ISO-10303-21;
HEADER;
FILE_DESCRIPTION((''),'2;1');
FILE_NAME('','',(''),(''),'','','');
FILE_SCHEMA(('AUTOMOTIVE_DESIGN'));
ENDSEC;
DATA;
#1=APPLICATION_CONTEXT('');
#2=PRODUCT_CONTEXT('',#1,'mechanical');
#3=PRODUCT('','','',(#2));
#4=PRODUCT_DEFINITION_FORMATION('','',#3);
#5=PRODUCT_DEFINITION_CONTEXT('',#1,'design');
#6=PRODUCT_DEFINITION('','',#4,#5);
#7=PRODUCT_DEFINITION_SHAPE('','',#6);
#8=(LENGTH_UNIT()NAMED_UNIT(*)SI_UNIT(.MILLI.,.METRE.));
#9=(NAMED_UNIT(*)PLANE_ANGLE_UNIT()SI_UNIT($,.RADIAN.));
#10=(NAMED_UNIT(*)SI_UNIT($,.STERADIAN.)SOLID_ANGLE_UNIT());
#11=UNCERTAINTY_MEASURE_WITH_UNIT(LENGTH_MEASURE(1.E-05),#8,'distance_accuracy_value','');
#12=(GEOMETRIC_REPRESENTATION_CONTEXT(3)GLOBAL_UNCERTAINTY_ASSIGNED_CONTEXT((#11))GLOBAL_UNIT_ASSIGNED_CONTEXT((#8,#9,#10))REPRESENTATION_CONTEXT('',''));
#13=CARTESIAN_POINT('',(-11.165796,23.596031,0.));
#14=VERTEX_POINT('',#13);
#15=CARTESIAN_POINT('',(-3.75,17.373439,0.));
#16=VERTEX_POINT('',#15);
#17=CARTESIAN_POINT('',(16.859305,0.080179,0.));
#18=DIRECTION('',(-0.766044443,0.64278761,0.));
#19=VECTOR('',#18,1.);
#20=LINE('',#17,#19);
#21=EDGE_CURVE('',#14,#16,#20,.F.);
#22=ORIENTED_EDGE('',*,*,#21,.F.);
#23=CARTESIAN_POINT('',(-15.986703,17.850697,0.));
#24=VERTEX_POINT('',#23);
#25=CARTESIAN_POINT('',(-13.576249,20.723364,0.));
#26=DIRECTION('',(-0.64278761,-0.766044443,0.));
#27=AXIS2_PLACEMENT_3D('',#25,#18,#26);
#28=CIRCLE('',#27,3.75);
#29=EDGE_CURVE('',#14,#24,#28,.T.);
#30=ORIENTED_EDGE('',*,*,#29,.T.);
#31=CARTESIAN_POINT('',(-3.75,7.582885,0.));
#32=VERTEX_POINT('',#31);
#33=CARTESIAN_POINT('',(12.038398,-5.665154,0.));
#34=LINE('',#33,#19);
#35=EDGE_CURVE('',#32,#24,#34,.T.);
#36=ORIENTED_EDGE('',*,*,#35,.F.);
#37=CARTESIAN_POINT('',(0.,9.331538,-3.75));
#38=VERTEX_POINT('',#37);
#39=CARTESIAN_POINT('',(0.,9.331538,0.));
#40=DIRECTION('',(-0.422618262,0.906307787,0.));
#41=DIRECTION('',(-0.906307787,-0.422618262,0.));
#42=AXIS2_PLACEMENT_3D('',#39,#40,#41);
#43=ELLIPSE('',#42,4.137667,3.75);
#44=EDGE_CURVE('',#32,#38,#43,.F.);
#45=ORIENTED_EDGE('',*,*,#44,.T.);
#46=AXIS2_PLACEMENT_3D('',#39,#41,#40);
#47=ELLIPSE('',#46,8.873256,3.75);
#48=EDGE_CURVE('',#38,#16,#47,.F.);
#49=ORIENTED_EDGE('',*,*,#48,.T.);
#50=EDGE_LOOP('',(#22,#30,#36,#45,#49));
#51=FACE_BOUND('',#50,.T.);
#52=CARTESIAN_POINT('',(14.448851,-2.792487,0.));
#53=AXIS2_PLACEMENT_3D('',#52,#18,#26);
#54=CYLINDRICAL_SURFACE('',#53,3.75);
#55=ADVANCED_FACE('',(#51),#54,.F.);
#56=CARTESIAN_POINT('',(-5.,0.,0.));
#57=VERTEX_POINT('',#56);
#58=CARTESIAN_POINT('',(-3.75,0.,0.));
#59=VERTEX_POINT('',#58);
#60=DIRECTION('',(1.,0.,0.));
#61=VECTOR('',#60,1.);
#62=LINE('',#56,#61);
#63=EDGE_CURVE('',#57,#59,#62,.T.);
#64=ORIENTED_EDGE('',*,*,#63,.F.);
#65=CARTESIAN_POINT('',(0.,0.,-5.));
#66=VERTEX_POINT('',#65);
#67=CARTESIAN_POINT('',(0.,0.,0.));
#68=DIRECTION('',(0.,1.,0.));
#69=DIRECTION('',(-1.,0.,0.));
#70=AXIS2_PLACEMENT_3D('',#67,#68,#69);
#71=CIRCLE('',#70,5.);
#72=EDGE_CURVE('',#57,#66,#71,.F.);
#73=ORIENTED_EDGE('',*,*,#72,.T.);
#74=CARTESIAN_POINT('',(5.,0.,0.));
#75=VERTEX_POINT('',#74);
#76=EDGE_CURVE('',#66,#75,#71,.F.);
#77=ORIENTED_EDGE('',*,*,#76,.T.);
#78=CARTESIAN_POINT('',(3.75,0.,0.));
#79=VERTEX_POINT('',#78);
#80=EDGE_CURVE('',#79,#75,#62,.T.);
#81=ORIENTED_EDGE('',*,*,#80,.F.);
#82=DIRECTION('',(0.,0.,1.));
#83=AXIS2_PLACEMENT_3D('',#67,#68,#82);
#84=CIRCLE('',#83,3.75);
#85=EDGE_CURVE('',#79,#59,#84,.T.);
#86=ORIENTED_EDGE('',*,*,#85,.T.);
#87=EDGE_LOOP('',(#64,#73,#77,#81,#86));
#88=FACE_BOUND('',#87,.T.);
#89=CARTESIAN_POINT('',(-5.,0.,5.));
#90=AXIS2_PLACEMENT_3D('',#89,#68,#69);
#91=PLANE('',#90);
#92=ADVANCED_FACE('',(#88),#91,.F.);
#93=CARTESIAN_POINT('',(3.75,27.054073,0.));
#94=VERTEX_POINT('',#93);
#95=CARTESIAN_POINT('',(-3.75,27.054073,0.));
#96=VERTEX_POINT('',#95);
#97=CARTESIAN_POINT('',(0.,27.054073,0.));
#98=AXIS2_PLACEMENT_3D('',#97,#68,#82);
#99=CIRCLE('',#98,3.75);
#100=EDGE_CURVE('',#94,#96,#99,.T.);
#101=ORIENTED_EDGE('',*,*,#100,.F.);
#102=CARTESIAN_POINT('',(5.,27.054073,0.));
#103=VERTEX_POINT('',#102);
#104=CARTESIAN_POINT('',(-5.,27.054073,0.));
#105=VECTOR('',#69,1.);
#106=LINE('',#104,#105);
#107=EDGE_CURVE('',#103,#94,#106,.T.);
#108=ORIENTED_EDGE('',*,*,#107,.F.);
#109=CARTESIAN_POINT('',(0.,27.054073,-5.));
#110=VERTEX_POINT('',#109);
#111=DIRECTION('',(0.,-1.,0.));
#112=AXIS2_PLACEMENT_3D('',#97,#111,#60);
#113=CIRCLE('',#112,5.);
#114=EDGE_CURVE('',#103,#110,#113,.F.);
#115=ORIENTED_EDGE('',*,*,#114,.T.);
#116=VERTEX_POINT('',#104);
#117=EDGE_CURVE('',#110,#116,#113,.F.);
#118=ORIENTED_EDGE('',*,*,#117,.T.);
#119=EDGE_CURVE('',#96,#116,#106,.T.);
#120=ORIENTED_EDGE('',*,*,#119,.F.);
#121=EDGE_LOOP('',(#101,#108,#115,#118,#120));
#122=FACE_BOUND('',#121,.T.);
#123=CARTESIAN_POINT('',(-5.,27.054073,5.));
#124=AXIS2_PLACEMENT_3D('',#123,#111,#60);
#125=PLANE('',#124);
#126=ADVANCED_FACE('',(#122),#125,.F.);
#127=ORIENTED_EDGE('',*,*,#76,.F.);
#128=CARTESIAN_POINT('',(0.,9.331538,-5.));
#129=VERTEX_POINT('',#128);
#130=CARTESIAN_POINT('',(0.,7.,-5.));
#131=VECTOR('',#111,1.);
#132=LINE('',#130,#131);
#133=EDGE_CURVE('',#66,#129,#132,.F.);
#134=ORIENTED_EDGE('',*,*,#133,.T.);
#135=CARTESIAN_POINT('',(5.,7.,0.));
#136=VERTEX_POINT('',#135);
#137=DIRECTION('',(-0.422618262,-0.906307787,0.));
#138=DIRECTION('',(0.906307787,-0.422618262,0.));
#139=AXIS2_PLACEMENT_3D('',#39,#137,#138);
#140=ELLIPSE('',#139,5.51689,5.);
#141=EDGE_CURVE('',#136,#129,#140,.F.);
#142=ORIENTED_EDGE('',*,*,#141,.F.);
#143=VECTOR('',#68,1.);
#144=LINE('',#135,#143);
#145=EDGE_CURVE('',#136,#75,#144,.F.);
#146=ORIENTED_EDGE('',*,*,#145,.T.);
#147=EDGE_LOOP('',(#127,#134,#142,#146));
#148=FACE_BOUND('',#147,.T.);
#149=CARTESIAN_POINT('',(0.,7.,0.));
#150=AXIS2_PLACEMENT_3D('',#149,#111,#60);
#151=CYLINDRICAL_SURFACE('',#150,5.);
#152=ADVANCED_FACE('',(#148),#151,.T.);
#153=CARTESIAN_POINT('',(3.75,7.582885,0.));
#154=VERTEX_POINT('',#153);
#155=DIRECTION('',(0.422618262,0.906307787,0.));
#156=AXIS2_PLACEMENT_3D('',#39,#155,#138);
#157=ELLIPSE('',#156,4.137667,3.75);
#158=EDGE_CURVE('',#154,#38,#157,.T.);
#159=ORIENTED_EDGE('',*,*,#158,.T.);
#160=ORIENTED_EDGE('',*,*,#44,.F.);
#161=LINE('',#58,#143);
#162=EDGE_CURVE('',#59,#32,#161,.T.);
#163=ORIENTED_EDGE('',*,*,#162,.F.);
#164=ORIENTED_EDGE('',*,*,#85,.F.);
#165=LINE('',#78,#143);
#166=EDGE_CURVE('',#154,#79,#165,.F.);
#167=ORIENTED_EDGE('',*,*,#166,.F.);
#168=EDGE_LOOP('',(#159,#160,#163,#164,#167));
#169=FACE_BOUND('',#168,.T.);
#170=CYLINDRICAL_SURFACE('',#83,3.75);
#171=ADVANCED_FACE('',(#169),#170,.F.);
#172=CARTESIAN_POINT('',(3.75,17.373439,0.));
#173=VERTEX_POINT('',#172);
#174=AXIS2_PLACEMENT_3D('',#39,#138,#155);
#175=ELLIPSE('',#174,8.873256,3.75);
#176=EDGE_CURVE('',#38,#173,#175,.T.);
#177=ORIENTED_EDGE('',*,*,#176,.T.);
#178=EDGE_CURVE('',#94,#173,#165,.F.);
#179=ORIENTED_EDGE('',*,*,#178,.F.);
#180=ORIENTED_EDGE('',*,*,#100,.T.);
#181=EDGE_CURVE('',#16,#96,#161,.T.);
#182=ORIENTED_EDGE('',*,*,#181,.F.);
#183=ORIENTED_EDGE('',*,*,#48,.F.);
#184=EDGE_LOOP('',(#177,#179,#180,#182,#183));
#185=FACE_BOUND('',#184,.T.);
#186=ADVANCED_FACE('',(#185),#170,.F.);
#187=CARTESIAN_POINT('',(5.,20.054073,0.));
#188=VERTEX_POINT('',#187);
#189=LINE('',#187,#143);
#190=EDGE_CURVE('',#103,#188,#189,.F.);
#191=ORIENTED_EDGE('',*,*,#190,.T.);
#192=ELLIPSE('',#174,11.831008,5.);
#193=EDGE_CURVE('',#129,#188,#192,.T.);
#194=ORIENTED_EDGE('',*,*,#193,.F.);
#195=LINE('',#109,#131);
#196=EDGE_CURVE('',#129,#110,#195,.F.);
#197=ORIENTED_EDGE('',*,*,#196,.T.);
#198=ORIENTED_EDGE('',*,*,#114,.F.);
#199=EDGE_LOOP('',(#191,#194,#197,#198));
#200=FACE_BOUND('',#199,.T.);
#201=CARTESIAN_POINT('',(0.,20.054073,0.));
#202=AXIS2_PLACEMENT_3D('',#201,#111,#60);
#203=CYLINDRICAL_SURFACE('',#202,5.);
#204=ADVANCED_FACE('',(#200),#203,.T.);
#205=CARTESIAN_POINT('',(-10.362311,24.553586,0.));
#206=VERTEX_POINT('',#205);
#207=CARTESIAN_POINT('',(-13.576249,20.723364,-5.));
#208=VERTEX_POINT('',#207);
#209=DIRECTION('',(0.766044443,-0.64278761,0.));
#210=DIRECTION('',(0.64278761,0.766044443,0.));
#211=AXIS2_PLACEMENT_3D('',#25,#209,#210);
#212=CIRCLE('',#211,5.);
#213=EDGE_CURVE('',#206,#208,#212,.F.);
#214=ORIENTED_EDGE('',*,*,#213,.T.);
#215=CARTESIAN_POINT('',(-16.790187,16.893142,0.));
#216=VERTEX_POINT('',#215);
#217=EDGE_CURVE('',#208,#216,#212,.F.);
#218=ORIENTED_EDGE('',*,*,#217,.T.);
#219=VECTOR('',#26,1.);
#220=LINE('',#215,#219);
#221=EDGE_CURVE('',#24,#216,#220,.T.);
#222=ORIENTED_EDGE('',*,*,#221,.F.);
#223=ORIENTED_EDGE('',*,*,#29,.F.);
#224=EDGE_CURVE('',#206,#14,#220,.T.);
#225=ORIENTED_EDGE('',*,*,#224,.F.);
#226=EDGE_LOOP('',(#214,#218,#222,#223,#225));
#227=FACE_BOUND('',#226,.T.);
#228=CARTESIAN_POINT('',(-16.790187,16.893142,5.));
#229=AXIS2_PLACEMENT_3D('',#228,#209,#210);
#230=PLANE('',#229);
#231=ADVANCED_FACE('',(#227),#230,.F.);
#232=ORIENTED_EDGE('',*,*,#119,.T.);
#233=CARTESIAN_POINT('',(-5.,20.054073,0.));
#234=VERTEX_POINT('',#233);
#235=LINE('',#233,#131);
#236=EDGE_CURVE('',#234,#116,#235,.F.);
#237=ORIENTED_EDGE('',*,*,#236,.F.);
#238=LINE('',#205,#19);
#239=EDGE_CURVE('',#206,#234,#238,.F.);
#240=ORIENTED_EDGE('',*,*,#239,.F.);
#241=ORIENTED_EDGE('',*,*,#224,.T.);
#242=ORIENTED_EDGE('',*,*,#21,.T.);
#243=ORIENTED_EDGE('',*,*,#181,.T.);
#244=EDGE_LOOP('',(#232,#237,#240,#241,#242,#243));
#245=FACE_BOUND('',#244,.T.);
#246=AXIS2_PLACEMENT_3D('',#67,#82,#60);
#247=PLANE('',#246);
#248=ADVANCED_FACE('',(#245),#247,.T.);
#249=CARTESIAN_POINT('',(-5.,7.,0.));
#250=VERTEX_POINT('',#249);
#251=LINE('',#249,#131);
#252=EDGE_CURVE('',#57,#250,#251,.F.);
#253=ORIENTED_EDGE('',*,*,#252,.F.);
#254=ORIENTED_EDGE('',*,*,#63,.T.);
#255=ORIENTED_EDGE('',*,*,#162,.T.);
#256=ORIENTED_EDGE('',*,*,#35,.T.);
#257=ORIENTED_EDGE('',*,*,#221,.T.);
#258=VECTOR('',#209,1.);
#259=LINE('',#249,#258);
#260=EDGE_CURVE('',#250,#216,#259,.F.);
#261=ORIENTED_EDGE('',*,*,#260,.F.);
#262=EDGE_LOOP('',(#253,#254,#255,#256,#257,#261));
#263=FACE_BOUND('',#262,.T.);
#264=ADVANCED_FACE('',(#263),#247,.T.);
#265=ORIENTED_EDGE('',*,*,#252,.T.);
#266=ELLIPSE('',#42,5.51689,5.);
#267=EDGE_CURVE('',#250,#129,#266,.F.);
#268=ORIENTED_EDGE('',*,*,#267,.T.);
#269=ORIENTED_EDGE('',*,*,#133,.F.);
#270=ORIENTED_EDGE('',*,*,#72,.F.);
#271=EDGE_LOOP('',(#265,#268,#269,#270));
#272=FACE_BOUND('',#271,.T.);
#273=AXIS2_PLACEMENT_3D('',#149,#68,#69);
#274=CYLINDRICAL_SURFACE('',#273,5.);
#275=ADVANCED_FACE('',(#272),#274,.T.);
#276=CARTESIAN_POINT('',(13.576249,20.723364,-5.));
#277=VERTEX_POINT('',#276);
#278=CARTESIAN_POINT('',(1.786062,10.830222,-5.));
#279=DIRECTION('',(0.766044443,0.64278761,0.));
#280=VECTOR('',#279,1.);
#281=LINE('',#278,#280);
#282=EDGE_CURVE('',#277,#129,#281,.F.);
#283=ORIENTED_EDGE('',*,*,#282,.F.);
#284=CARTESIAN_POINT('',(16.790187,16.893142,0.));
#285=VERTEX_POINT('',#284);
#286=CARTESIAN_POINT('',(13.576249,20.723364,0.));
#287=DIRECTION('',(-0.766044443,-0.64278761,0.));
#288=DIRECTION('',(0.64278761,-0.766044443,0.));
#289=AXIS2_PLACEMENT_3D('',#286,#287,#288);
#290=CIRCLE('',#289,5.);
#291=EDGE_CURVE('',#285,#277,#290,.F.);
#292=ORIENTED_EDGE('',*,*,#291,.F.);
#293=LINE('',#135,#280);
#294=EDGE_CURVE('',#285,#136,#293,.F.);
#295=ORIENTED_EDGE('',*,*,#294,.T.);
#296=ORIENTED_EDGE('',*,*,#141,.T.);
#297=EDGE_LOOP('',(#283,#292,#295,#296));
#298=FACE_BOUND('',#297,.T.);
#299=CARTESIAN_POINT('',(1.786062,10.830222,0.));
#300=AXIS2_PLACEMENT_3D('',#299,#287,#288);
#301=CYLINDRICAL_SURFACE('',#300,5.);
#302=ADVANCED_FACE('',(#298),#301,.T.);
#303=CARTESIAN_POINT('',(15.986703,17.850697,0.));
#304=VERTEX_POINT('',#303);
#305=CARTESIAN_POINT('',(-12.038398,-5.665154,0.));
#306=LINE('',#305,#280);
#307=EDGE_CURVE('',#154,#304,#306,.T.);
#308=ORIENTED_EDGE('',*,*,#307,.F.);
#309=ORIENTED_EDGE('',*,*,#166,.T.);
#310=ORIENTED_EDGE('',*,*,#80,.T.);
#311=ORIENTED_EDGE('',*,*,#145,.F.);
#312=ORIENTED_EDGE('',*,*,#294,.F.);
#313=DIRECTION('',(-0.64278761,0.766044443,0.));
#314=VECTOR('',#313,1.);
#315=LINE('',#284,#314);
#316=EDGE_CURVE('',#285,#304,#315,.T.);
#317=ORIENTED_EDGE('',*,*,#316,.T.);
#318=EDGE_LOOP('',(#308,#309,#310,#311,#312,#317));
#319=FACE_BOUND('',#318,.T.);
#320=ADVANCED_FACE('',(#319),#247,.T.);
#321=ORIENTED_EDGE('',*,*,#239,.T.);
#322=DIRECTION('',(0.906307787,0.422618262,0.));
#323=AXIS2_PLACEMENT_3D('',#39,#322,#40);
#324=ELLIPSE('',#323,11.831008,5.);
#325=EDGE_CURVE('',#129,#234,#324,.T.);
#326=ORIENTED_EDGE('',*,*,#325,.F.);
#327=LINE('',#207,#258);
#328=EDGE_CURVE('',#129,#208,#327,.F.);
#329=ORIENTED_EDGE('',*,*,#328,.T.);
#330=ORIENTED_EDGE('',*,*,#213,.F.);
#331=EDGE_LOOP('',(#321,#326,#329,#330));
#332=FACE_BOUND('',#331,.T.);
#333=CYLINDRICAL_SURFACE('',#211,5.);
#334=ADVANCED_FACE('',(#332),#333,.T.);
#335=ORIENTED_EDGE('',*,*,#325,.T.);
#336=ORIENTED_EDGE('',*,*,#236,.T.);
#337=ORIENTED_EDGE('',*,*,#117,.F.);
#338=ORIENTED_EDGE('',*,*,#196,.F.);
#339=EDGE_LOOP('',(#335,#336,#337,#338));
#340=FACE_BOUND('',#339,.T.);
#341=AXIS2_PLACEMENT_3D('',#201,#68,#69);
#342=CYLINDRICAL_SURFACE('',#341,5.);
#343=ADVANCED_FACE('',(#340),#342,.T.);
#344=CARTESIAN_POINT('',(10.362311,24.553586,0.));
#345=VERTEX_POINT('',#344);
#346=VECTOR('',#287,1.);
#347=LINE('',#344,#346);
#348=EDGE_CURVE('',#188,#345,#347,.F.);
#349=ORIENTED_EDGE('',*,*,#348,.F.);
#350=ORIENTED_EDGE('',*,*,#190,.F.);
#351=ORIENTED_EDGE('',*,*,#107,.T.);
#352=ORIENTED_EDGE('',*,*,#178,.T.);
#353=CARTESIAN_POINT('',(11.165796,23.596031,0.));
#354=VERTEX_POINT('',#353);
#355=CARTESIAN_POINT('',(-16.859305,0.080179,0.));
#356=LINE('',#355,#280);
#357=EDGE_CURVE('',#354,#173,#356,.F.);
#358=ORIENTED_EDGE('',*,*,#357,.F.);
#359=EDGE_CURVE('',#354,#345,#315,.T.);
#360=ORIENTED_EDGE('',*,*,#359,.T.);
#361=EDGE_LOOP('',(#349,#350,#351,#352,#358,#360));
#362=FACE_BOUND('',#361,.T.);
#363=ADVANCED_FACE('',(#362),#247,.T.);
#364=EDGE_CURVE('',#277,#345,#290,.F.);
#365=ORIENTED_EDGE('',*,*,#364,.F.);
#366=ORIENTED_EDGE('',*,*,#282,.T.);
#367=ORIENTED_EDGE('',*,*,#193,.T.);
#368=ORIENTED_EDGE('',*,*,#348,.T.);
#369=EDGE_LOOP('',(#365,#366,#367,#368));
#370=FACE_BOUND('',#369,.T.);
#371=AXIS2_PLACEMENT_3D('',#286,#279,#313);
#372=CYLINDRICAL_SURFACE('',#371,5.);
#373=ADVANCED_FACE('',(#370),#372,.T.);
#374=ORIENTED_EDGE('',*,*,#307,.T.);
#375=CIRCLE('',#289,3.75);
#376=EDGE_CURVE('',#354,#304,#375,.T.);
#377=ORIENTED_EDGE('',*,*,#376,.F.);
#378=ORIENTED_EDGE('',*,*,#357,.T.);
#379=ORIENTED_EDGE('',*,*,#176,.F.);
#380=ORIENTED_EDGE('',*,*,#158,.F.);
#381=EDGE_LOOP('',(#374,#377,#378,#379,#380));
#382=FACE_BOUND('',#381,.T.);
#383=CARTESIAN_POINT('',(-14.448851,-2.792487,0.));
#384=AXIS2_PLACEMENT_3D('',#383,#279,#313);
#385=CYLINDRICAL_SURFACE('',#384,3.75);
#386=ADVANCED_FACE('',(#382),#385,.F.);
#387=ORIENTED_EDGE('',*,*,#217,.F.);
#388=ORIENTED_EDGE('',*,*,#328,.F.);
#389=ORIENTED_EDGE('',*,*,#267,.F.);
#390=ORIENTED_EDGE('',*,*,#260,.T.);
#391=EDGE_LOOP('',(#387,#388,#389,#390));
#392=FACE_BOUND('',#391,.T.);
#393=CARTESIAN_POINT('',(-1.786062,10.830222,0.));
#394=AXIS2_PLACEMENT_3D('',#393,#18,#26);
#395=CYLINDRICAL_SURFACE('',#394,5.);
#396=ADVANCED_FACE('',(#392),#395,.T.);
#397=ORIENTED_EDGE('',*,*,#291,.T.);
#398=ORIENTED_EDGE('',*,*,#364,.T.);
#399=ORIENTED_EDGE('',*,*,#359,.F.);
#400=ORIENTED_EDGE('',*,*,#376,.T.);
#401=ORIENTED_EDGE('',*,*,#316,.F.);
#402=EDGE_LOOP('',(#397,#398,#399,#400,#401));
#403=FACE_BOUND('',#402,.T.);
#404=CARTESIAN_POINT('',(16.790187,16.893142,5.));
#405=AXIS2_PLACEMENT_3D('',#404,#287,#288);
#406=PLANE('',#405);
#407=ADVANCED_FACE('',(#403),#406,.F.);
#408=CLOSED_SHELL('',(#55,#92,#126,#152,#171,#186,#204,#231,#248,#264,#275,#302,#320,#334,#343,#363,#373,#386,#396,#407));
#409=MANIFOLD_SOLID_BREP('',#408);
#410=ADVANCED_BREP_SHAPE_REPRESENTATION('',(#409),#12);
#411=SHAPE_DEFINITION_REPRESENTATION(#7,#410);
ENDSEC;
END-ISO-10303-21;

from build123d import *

# Parameters (mm, degrees)
EXTRUDE_659_DEPTH           = 5
SKETCH_4_R                  = 3.75
CUT_EXTRUDE_1016_DEPTH      = 33.230936168
CUT_EXTRUDE_1190_REACH      = 40.468
CUT_EXTRUDE_1190_END_RADIUS = 3.75
SKETCH_5_R                  = 3.75
FILLET_8_R                  = 5


with BuildPart() as part:
    # Эскиз3 → Extrude 659 (new, symmetric)
    with BuildSketch(Plane.XY):
        Polygon((-5, 7), (-16.790187199, 16.89314173), (-10.362311102, 24.553586161), (-5, 20.054072893), (-5, 27.054072893), (5, 27.054072893), (5, 20.054072893), (10.362311102, 24.553586161), (16.790187199, 16.89314173), (5, 7), (5, 0), (-5, 0), align=None)
    extrude(amount=EXTRUDE_659_DEPTH, both=True)

    # Эскиз4 → Cut-Extrude 1016 (cut, through all)
    with BuildSketch(Plane(origin=(0, 27.054072893, 0), x_dir=(-1, 0, 0), z_dir=(0, 1, 0))):
        with Locations(Location((0, 0, 0), (0, 0, 90))):
            Circle(SKETCH_4_R)
    extrude(amount=-CUT_EXTRUDE_1016_DEPTH, mode=Mode.SUBTRACT)

    # Cut-Extrude 1190: up to this cylinder (the profile starts outside it)
    cut_extrude_1190_end = Plane(origin=(0, 20.723364, 0), z_dir=(0, 1, 0)) * Cylinder(CUT_EXTRUDE_1190_END_RADIUS, 89.436, mode=Mode.PRIVATE)
    # Эскиз5 → Cut-Extrude 1190 (cut, up to the surface)
    with BuildSketch(Plane(origin=(-18.171134778, 15.247392491, 0), x_dir=(0, 0, 1), z_dir=(-0.7660444431189745, 0.6427876096865438, 0)), mode=Mode.PRIVATE) as cut_extrude_1190_sk1:
        with Locations(Location((0, 7.148373053, 0), (0, 0, 270))):
            Circle(SKETCH_5_R)
    cut_extrude_1190_tool1 = extrude(cut_extrude_1190_sk1.sketch, amount=-CUT_EXTRUDE_1190_REACH, mode=Mode.PRIVATE) - cut_extrude_1190_end
    cut_extrude_1190 = cut_extrude_1190_tool1.solids().sort_by_distance((-13.576249, 20.723364, 0))[0]
    add(cut_extrude_1190, mode=Mode.SUBTRACT)

    # Зеркальное отражение1: Cut-Extrude 1190 across plane
    add(cut_extrude_1190.mirror(Plane(origin=(0, 0, 0), x_dir=(0, 0, 1), z_dir=(1, 0, 0))), mode=Mode.SUBTRACT)

    # Скругление8
    fillet_8_edges = [part.edges().sort_by_distance(p)[0] for p in [
        (7.681155551, 22.303829527, -5),
        (5, 23.554072893, -5),
        (-5, 23.554072893, -5),
        (-7.681155551, 22.303829527, -5),
        (-10.895093599, 11.946570865, -5),
        (-5, 3.5, -5),
        (5, 3.5, -5),
        (10.895093599, 11.946570865, -5),
        (-5, 3.5, 5),
        (5, 3.5, 5),
        (10.895093599, 11.946570865, 5),
        (7.681155551, 22.303829527, 5),
        (5, 23.554072893, 5),
        (-5, 23.554072893, 5),
        (-7.681155551, 22.303829527, 5),
        (-10.895093599, 11.946570865, 5),
    ]]
    fillet(fillet_8_edges, radius=FILLET_8_R - 0.0001)  # a hair under: the kernel refuses the full size

    # Split Bodies 2695
    split(bisect_by=Plane.XY, keep=Keep.BOTTOM)


solid = part.part
